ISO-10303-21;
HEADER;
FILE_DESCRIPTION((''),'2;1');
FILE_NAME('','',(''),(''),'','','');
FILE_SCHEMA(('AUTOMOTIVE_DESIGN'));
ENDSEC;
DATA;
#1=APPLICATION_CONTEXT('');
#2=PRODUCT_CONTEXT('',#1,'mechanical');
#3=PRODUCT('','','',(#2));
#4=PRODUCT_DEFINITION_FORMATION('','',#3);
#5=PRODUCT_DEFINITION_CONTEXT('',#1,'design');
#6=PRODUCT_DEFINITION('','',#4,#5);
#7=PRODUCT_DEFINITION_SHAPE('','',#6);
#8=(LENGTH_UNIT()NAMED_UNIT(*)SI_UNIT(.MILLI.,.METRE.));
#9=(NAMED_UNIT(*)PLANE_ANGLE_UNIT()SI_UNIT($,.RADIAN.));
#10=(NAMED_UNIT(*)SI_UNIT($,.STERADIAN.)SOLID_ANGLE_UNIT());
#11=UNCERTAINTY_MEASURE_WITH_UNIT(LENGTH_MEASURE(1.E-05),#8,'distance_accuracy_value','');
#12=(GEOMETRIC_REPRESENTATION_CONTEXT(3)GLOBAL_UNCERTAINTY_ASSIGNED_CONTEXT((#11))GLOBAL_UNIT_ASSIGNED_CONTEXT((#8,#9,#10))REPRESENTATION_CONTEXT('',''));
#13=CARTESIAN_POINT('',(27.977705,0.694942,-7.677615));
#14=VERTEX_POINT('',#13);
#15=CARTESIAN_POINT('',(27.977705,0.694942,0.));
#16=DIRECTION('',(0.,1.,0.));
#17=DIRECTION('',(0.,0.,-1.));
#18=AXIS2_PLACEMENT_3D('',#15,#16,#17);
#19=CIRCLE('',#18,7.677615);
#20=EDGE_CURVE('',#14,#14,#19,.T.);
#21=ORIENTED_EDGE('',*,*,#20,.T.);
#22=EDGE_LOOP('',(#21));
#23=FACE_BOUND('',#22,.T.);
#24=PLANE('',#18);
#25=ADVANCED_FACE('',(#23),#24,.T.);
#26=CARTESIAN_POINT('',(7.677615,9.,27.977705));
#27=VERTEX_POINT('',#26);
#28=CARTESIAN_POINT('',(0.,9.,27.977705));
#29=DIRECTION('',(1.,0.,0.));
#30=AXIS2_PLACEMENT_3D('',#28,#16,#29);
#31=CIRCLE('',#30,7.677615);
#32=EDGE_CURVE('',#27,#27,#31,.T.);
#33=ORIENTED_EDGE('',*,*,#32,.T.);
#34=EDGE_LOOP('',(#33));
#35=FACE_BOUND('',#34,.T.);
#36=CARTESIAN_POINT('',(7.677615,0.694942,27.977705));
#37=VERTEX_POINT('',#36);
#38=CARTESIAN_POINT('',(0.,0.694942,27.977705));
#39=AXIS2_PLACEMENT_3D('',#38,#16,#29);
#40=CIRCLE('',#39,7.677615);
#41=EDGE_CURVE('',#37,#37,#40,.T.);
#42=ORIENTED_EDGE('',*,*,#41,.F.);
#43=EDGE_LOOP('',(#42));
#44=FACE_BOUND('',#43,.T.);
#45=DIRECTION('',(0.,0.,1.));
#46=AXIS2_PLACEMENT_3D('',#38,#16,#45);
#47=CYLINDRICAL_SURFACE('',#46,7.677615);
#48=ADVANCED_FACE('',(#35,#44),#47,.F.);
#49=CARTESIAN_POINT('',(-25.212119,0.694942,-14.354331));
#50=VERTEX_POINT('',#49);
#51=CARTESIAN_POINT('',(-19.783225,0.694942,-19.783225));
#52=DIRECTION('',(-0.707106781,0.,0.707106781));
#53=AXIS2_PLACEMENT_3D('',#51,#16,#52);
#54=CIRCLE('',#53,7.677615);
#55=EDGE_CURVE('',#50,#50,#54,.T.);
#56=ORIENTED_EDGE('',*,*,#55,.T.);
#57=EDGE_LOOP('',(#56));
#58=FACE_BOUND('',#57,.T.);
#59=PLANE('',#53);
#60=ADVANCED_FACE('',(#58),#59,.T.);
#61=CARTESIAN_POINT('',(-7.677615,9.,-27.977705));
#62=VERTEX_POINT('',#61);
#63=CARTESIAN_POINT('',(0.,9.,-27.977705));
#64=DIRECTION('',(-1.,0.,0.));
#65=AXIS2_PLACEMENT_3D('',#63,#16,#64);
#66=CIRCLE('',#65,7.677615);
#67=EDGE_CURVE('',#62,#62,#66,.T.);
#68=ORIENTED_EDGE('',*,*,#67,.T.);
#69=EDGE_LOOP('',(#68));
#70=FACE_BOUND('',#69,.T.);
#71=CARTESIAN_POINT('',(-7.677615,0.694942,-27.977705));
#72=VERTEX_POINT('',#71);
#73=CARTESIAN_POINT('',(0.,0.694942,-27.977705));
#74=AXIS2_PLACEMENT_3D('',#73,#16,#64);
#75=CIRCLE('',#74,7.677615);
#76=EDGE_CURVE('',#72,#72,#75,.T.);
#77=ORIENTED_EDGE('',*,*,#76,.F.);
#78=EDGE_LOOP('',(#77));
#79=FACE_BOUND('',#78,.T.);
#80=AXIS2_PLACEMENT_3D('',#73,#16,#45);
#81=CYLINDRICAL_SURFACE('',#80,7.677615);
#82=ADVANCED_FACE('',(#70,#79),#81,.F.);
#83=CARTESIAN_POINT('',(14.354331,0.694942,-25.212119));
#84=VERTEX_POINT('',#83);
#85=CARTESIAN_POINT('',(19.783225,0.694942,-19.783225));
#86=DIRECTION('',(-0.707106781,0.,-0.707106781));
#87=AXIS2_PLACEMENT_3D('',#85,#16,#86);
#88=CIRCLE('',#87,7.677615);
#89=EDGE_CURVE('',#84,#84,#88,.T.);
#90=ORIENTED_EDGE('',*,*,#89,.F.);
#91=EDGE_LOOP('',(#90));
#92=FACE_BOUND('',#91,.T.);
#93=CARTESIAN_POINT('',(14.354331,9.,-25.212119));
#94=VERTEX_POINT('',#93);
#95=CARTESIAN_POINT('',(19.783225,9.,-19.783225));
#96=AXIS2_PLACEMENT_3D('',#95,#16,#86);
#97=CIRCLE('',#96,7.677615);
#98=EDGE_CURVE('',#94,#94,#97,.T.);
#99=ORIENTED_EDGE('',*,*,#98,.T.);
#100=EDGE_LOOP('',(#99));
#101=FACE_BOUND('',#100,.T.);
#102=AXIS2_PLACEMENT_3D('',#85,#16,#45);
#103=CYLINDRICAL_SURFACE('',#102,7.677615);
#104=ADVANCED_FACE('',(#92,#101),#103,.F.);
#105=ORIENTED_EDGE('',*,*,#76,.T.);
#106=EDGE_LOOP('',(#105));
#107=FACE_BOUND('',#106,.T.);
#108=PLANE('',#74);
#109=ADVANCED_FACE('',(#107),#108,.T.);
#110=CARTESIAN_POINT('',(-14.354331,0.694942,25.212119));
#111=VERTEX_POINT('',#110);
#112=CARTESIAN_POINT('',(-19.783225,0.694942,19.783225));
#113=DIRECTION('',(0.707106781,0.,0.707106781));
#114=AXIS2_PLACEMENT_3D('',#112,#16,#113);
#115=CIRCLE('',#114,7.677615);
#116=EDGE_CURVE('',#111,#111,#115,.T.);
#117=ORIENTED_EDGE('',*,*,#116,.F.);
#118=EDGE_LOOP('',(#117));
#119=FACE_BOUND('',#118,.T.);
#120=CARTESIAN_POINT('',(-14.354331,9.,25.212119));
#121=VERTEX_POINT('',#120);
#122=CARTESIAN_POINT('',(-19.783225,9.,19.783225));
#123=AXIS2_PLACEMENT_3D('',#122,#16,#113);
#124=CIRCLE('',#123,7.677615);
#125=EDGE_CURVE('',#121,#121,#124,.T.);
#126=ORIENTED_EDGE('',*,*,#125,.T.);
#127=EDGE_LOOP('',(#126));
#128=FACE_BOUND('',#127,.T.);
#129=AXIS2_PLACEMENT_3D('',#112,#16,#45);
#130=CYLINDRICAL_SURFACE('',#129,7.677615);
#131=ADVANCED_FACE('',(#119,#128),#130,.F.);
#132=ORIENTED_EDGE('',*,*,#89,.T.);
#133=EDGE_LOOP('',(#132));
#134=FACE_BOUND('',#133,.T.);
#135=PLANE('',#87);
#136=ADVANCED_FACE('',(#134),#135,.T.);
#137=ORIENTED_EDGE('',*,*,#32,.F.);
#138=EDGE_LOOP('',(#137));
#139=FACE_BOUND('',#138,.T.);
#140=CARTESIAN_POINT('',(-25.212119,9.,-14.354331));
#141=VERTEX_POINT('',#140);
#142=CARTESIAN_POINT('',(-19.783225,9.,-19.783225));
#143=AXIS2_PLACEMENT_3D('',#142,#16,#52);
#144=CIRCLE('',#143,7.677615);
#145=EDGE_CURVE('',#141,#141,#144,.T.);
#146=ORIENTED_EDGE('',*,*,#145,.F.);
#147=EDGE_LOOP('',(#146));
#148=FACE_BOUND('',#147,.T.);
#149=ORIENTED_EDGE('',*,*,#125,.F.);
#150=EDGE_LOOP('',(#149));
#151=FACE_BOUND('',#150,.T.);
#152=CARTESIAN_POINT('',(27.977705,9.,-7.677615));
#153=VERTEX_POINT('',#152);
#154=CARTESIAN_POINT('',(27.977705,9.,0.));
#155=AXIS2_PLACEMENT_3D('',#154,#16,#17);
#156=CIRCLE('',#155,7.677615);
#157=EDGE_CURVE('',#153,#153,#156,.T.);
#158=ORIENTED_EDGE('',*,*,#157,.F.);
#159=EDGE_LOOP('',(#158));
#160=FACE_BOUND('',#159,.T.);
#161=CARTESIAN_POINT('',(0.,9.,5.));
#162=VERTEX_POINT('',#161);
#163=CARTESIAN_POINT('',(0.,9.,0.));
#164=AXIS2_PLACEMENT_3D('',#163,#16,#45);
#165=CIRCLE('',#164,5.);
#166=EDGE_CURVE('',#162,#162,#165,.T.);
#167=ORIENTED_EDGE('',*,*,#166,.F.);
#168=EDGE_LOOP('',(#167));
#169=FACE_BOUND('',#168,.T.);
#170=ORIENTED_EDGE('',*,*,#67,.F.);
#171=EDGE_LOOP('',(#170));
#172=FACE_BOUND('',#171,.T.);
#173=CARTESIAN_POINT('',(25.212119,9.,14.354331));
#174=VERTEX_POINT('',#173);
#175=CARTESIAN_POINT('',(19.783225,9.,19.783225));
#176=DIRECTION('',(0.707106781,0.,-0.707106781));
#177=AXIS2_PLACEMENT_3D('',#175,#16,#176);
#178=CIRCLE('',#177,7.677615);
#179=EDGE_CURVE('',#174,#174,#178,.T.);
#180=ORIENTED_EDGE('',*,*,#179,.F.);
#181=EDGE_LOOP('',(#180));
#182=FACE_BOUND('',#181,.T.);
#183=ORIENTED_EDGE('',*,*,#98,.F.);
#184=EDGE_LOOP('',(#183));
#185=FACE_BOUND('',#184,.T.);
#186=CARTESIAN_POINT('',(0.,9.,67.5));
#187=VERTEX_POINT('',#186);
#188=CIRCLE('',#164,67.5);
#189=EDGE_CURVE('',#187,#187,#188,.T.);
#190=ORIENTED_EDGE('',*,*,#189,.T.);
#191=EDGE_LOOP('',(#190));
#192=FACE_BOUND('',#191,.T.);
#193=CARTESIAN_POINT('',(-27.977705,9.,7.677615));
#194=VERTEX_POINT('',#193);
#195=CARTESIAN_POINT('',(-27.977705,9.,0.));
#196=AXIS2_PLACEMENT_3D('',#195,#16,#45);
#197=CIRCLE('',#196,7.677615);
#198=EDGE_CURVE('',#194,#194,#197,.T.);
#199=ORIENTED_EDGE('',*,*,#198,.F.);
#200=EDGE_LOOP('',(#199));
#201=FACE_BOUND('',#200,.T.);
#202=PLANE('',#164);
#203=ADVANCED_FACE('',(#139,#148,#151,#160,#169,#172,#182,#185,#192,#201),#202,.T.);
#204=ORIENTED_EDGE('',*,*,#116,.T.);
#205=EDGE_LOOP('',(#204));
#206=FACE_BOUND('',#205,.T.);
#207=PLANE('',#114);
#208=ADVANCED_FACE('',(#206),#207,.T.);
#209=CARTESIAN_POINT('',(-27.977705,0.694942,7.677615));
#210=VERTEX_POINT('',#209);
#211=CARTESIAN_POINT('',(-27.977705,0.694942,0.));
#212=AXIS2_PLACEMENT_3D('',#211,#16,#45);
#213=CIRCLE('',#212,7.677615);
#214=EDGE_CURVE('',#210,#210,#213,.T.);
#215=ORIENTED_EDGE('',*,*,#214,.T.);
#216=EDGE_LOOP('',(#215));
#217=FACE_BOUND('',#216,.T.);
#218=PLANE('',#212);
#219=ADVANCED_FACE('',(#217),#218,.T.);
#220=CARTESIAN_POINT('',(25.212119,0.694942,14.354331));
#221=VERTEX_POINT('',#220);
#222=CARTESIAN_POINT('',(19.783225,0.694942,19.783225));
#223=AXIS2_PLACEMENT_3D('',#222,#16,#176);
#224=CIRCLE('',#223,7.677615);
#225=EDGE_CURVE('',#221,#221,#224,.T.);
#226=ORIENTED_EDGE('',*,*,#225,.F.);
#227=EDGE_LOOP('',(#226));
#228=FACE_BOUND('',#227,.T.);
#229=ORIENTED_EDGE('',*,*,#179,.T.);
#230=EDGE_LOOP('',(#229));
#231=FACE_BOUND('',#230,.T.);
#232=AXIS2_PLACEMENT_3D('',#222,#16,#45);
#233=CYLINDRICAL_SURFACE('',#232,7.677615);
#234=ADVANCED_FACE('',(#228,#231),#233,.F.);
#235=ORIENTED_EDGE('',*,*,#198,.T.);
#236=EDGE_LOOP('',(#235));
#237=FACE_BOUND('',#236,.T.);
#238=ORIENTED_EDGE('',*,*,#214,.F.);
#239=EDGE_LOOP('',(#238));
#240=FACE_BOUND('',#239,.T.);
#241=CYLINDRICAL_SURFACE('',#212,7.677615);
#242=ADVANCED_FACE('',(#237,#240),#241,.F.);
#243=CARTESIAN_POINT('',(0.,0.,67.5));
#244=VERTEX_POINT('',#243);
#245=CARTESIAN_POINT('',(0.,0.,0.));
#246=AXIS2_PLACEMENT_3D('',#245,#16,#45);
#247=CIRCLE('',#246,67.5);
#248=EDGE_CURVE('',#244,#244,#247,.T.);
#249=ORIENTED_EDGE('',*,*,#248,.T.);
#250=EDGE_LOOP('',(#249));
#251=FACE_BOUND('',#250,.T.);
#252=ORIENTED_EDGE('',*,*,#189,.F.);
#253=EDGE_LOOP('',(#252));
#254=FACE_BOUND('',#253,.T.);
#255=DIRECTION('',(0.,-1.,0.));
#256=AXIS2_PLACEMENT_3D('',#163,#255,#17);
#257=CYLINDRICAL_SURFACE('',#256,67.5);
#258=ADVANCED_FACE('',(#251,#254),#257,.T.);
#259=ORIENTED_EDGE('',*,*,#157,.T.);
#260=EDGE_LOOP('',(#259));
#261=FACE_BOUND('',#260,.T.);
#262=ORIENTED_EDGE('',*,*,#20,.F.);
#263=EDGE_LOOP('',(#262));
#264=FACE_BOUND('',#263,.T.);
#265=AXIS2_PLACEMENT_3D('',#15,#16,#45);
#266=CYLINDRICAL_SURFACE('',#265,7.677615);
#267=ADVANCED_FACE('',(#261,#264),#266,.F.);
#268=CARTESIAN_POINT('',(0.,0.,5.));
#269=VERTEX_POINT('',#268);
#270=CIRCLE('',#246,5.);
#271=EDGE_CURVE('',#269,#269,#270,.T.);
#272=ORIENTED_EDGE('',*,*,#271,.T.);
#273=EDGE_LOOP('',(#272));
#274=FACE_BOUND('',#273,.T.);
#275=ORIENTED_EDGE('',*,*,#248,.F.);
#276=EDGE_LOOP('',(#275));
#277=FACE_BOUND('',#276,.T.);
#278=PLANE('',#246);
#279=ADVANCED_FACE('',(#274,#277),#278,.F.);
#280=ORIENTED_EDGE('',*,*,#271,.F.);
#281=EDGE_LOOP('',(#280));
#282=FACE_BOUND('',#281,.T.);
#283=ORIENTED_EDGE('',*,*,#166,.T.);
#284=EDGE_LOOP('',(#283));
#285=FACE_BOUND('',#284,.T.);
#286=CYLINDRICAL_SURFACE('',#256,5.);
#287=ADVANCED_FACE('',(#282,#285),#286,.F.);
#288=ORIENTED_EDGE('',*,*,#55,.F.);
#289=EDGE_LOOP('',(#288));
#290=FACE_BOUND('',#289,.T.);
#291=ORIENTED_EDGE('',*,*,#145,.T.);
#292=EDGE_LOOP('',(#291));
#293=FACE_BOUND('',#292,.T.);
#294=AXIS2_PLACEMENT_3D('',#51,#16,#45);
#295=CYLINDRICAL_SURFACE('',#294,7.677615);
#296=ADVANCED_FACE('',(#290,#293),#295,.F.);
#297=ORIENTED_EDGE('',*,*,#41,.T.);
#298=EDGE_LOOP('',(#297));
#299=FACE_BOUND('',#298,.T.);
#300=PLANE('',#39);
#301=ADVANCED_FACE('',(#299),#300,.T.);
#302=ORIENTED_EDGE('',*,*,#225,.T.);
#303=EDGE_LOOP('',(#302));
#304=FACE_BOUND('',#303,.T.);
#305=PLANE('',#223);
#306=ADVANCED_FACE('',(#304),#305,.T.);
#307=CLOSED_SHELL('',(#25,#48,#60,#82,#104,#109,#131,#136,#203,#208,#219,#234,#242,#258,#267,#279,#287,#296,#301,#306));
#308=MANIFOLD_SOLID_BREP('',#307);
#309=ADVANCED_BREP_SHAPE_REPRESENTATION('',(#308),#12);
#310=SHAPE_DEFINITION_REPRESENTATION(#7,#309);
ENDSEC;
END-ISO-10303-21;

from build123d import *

# Parameters (mm, degrees)
SKETCH1_R           = 67.5
BOSS_EXTRUDE1_DEPTH = 9
SKETCH2_R           = 5
CUT_EXTRUDE1_DEPTH  = 96.882740887
SKETCH3_R           = 7.67761536
CUT_EXTRUDE2_DEPTH  = 8.305058356
CIRPATTERN1_COUNT   = 8


with BuildPart() as part:
    # Sketch1 → Boss-Extrude1 (new body)
    with BuildSketch(Plane(origin=(0, 0, 0), x_dir=(1, 0, 0), z_dir=(0, 1, 0))):
        Circle(SKETCH1_R)
    extrude(amount=BOSS_EXTRUDE1_DEPTH)

    # Sketch2 → Cut-Extrude1 (cut, through all)
    with BuildSketch(Plane(origin=(0, 0, 0), x_dir=(1, 0, 0), z_dir=(0, 1, 0))):
        Circle(SKETCH2_R)
    extrude(amount=CUT_EXTRUDE1_DEPTH, mode=Mode.SUBTRACT)

    # Sketch3 → Cut-Extrude2 (cut)
    with BuildSketch(Plane(origin=(0, 9, 0), x_dir=(1, 0, 0), z_dir=(0, 1, 0))):
        with Locations((-27.977705151, 0)):
            Circle(SKETCH3_R)
    cut_extrude2 = extrude(amount=-CUT_EXTRUDE2_DEPTH, mode=Mode.SUBTRACT)

    # CirPattern1: Cut-Extrude2 ×8 about axis
    cirpattern1_axis = Axis((0, 0, 0), (0, 1, 0))
    for i in range(1, CIRPATTERN1_COUNT):
        add(cut_extrude2.rotate(cirpattern1_axis, i * 360 / CIRPATTERN1_COUNT), mode=Mode.SUBTRACT)


solid = part.part
